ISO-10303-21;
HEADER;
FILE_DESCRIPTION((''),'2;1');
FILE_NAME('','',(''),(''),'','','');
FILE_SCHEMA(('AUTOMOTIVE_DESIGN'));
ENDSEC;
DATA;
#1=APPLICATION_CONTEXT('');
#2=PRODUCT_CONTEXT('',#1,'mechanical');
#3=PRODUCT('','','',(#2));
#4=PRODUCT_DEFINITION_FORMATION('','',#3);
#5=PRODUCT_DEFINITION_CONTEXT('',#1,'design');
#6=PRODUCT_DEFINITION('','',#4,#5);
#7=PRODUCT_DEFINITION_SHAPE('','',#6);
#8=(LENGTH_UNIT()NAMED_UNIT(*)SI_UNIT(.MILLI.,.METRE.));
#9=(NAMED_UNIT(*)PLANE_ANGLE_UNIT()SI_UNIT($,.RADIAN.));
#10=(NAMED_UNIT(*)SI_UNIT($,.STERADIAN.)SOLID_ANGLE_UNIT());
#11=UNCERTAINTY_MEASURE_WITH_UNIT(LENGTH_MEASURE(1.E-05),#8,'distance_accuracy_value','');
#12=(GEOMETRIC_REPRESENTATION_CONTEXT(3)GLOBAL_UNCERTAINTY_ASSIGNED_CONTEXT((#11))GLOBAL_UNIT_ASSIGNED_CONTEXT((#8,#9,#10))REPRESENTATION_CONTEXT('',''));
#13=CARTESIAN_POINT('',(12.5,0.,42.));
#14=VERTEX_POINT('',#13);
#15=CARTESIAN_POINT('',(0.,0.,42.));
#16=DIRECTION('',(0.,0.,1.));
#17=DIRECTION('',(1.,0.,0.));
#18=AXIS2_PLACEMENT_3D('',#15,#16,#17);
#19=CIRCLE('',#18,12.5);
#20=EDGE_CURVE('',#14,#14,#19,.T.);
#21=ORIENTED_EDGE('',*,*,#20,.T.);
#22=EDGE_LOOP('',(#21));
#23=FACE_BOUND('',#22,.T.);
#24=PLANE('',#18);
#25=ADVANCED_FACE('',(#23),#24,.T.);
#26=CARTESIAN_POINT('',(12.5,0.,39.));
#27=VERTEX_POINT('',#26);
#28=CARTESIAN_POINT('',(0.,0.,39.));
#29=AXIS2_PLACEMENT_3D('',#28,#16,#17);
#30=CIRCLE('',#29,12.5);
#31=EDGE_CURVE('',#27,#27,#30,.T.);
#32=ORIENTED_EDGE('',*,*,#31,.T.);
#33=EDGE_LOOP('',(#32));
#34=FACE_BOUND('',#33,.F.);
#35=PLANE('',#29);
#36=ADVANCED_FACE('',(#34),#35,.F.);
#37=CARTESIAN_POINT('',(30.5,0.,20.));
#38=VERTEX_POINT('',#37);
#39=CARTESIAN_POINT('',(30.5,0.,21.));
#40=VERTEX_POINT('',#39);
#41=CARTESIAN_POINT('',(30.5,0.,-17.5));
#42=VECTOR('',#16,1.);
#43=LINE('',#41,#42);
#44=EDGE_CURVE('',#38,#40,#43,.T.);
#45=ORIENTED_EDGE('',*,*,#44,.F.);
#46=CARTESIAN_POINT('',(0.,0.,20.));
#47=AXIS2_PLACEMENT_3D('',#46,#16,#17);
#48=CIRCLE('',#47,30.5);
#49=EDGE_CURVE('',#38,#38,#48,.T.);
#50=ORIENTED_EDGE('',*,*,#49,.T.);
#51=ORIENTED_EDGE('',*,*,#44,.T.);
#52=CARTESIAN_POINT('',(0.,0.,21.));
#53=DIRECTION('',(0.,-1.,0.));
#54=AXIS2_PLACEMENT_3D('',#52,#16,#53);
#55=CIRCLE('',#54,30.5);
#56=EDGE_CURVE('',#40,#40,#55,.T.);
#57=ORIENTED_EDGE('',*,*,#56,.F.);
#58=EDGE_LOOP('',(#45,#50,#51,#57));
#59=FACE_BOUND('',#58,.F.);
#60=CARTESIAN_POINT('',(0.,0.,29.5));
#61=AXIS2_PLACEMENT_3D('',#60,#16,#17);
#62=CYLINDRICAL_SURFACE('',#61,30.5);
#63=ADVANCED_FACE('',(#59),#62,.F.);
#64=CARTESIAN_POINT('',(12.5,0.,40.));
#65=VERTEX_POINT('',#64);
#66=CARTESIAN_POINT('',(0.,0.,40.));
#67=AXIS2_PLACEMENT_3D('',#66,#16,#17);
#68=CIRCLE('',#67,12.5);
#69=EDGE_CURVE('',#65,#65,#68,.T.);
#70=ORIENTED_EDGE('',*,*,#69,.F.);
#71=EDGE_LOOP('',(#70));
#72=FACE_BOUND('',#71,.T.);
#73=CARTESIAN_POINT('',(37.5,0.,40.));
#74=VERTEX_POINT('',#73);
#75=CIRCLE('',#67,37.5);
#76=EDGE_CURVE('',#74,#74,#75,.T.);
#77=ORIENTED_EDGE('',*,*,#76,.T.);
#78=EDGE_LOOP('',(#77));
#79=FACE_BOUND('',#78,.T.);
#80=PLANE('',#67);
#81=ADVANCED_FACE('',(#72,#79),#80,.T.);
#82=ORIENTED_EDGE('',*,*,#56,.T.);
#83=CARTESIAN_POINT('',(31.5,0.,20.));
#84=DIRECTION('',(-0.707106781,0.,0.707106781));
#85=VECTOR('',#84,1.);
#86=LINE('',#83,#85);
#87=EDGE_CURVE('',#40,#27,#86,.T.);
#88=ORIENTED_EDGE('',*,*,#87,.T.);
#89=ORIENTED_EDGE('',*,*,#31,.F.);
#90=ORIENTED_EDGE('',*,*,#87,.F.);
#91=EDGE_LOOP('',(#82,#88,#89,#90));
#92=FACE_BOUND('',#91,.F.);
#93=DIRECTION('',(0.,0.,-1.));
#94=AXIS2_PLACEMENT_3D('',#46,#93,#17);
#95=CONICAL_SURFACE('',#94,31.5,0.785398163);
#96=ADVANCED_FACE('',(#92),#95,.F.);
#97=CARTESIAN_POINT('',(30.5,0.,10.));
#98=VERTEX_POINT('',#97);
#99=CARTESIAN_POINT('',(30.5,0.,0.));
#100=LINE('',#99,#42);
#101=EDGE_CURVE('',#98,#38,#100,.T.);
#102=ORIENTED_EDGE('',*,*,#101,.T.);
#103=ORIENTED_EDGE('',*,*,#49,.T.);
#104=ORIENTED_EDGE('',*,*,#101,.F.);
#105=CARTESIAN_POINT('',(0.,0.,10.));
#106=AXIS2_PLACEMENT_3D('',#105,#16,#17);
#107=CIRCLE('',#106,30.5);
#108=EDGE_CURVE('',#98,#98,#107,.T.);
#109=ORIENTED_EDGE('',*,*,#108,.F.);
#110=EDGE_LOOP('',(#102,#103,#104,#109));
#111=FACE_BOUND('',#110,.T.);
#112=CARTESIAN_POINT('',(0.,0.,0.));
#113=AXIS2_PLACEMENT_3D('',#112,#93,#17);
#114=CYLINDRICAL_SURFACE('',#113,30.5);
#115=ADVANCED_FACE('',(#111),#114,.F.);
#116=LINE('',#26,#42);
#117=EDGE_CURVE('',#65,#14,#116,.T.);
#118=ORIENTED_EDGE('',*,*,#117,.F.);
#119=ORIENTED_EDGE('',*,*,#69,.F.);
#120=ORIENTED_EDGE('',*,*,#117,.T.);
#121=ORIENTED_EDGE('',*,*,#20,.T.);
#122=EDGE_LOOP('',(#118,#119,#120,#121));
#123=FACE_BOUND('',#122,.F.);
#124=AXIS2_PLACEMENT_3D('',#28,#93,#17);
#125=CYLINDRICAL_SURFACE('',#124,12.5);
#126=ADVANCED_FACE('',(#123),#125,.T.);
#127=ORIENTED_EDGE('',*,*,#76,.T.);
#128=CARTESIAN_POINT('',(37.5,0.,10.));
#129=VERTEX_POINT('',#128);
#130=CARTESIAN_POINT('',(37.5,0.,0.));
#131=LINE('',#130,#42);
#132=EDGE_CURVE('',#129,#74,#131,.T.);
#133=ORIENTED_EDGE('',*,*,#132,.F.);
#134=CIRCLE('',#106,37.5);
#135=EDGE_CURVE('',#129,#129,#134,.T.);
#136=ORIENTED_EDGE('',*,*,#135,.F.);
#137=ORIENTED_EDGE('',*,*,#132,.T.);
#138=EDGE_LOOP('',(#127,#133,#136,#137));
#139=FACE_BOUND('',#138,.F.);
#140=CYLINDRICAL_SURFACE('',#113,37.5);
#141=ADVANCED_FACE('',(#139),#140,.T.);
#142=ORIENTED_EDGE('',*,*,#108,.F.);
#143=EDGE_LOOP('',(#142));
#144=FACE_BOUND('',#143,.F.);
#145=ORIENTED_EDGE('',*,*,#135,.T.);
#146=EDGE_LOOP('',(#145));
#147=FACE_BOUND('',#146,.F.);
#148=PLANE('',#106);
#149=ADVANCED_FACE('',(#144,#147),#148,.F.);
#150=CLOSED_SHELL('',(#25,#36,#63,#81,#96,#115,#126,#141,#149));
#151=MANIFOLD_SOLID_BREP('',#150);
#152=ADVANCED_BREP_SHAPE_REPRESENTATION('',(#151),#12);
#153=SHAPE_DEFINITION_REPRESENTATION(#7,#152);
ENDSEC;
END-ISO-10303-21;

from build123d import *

# Parameters (mm, degrees)
F0_R        = 37.5
F0_R_2      = 30.5
F1_DEPTH    = 40
F2_START    = 20
F0_R_3      = 12.5
F2_DEPTH    = 20
F3_START    = 39
F3_DEPTH    = 3
F4_S5_R     = 30.5
F4_T6_DEPTH = 47
F5_DEPTH    = 10


# Not quite as in the source:
# - a fillet or chamfer that OpenCascade refuses, or shapes differently, is made with other operations: its cross-section is extruded or revolved along the edge and cut away or added


with BuildPart() as f1:
    # F0 (on Top) → F1 (new body)
    with BuildSketch(Plane.XY):
        Circle(F0_R)
        Circle(F0_R_2, mode=Mode.SUBTRACT)
    extrude(amount=F1_DEPTH)

    # F0 (on Top) → F2 (join)
    with BuildSketch(Plane.XY.offset(F2_START)):
        Circle(F0_R_2)
        Circle(F0_R_3, mode=Mode.SUBTRACT)
    extrude(amount=F2_DEPTH)

    # F0 (on Top) → F3 (join)
    with BuildSketch(Plane.XY.offset(F3_START)):
        Circle(F0_R_3)
    extrude(amount=F3_DEPTH)

    # F4: chamfer of 19 on 1 edges, made by hand


with BuildPart() as f4_tool2:
    # F4_s3 → F4_t4 (revolve)
    with BuildSketch(Plane.XZ):
        Polygon((31.5, 20), (12.5, 39), (12.5, 20), align=None)
    revolve(axis=Axis((0, 0, 20), (0, 0, 1)))

    # F4_s5 → F4_t6 (intersect, symmetric)
    with BuildSketch(Plane.XY.offset(29.5)):
        Circle(F4_S5_R)
    extrude(amount=F4_T6_DEPTH, both=True, mode=Mode.INTERSECT)

    split(bisect_by=Plane.XY.offset(39), keep=Keep.BOTTOM)


with BuildPart() as f1_1:
    add(f1.part)

    # F4_t1: cut F4_tool2
    add(f4_tool2.part, mode=Mode.SUBTRACT)

    # F5 (cut): a face of the model
    f5_faces = [f1_1.faces().sort_by_distance(p)[0] for p in [
        (-36.4393398282, 0, 0),
    ]]
    extrude(f5_faces, amount=-F5_DEPTH, mode=Mode.SUBTRACT)


solid = f1_1.part
